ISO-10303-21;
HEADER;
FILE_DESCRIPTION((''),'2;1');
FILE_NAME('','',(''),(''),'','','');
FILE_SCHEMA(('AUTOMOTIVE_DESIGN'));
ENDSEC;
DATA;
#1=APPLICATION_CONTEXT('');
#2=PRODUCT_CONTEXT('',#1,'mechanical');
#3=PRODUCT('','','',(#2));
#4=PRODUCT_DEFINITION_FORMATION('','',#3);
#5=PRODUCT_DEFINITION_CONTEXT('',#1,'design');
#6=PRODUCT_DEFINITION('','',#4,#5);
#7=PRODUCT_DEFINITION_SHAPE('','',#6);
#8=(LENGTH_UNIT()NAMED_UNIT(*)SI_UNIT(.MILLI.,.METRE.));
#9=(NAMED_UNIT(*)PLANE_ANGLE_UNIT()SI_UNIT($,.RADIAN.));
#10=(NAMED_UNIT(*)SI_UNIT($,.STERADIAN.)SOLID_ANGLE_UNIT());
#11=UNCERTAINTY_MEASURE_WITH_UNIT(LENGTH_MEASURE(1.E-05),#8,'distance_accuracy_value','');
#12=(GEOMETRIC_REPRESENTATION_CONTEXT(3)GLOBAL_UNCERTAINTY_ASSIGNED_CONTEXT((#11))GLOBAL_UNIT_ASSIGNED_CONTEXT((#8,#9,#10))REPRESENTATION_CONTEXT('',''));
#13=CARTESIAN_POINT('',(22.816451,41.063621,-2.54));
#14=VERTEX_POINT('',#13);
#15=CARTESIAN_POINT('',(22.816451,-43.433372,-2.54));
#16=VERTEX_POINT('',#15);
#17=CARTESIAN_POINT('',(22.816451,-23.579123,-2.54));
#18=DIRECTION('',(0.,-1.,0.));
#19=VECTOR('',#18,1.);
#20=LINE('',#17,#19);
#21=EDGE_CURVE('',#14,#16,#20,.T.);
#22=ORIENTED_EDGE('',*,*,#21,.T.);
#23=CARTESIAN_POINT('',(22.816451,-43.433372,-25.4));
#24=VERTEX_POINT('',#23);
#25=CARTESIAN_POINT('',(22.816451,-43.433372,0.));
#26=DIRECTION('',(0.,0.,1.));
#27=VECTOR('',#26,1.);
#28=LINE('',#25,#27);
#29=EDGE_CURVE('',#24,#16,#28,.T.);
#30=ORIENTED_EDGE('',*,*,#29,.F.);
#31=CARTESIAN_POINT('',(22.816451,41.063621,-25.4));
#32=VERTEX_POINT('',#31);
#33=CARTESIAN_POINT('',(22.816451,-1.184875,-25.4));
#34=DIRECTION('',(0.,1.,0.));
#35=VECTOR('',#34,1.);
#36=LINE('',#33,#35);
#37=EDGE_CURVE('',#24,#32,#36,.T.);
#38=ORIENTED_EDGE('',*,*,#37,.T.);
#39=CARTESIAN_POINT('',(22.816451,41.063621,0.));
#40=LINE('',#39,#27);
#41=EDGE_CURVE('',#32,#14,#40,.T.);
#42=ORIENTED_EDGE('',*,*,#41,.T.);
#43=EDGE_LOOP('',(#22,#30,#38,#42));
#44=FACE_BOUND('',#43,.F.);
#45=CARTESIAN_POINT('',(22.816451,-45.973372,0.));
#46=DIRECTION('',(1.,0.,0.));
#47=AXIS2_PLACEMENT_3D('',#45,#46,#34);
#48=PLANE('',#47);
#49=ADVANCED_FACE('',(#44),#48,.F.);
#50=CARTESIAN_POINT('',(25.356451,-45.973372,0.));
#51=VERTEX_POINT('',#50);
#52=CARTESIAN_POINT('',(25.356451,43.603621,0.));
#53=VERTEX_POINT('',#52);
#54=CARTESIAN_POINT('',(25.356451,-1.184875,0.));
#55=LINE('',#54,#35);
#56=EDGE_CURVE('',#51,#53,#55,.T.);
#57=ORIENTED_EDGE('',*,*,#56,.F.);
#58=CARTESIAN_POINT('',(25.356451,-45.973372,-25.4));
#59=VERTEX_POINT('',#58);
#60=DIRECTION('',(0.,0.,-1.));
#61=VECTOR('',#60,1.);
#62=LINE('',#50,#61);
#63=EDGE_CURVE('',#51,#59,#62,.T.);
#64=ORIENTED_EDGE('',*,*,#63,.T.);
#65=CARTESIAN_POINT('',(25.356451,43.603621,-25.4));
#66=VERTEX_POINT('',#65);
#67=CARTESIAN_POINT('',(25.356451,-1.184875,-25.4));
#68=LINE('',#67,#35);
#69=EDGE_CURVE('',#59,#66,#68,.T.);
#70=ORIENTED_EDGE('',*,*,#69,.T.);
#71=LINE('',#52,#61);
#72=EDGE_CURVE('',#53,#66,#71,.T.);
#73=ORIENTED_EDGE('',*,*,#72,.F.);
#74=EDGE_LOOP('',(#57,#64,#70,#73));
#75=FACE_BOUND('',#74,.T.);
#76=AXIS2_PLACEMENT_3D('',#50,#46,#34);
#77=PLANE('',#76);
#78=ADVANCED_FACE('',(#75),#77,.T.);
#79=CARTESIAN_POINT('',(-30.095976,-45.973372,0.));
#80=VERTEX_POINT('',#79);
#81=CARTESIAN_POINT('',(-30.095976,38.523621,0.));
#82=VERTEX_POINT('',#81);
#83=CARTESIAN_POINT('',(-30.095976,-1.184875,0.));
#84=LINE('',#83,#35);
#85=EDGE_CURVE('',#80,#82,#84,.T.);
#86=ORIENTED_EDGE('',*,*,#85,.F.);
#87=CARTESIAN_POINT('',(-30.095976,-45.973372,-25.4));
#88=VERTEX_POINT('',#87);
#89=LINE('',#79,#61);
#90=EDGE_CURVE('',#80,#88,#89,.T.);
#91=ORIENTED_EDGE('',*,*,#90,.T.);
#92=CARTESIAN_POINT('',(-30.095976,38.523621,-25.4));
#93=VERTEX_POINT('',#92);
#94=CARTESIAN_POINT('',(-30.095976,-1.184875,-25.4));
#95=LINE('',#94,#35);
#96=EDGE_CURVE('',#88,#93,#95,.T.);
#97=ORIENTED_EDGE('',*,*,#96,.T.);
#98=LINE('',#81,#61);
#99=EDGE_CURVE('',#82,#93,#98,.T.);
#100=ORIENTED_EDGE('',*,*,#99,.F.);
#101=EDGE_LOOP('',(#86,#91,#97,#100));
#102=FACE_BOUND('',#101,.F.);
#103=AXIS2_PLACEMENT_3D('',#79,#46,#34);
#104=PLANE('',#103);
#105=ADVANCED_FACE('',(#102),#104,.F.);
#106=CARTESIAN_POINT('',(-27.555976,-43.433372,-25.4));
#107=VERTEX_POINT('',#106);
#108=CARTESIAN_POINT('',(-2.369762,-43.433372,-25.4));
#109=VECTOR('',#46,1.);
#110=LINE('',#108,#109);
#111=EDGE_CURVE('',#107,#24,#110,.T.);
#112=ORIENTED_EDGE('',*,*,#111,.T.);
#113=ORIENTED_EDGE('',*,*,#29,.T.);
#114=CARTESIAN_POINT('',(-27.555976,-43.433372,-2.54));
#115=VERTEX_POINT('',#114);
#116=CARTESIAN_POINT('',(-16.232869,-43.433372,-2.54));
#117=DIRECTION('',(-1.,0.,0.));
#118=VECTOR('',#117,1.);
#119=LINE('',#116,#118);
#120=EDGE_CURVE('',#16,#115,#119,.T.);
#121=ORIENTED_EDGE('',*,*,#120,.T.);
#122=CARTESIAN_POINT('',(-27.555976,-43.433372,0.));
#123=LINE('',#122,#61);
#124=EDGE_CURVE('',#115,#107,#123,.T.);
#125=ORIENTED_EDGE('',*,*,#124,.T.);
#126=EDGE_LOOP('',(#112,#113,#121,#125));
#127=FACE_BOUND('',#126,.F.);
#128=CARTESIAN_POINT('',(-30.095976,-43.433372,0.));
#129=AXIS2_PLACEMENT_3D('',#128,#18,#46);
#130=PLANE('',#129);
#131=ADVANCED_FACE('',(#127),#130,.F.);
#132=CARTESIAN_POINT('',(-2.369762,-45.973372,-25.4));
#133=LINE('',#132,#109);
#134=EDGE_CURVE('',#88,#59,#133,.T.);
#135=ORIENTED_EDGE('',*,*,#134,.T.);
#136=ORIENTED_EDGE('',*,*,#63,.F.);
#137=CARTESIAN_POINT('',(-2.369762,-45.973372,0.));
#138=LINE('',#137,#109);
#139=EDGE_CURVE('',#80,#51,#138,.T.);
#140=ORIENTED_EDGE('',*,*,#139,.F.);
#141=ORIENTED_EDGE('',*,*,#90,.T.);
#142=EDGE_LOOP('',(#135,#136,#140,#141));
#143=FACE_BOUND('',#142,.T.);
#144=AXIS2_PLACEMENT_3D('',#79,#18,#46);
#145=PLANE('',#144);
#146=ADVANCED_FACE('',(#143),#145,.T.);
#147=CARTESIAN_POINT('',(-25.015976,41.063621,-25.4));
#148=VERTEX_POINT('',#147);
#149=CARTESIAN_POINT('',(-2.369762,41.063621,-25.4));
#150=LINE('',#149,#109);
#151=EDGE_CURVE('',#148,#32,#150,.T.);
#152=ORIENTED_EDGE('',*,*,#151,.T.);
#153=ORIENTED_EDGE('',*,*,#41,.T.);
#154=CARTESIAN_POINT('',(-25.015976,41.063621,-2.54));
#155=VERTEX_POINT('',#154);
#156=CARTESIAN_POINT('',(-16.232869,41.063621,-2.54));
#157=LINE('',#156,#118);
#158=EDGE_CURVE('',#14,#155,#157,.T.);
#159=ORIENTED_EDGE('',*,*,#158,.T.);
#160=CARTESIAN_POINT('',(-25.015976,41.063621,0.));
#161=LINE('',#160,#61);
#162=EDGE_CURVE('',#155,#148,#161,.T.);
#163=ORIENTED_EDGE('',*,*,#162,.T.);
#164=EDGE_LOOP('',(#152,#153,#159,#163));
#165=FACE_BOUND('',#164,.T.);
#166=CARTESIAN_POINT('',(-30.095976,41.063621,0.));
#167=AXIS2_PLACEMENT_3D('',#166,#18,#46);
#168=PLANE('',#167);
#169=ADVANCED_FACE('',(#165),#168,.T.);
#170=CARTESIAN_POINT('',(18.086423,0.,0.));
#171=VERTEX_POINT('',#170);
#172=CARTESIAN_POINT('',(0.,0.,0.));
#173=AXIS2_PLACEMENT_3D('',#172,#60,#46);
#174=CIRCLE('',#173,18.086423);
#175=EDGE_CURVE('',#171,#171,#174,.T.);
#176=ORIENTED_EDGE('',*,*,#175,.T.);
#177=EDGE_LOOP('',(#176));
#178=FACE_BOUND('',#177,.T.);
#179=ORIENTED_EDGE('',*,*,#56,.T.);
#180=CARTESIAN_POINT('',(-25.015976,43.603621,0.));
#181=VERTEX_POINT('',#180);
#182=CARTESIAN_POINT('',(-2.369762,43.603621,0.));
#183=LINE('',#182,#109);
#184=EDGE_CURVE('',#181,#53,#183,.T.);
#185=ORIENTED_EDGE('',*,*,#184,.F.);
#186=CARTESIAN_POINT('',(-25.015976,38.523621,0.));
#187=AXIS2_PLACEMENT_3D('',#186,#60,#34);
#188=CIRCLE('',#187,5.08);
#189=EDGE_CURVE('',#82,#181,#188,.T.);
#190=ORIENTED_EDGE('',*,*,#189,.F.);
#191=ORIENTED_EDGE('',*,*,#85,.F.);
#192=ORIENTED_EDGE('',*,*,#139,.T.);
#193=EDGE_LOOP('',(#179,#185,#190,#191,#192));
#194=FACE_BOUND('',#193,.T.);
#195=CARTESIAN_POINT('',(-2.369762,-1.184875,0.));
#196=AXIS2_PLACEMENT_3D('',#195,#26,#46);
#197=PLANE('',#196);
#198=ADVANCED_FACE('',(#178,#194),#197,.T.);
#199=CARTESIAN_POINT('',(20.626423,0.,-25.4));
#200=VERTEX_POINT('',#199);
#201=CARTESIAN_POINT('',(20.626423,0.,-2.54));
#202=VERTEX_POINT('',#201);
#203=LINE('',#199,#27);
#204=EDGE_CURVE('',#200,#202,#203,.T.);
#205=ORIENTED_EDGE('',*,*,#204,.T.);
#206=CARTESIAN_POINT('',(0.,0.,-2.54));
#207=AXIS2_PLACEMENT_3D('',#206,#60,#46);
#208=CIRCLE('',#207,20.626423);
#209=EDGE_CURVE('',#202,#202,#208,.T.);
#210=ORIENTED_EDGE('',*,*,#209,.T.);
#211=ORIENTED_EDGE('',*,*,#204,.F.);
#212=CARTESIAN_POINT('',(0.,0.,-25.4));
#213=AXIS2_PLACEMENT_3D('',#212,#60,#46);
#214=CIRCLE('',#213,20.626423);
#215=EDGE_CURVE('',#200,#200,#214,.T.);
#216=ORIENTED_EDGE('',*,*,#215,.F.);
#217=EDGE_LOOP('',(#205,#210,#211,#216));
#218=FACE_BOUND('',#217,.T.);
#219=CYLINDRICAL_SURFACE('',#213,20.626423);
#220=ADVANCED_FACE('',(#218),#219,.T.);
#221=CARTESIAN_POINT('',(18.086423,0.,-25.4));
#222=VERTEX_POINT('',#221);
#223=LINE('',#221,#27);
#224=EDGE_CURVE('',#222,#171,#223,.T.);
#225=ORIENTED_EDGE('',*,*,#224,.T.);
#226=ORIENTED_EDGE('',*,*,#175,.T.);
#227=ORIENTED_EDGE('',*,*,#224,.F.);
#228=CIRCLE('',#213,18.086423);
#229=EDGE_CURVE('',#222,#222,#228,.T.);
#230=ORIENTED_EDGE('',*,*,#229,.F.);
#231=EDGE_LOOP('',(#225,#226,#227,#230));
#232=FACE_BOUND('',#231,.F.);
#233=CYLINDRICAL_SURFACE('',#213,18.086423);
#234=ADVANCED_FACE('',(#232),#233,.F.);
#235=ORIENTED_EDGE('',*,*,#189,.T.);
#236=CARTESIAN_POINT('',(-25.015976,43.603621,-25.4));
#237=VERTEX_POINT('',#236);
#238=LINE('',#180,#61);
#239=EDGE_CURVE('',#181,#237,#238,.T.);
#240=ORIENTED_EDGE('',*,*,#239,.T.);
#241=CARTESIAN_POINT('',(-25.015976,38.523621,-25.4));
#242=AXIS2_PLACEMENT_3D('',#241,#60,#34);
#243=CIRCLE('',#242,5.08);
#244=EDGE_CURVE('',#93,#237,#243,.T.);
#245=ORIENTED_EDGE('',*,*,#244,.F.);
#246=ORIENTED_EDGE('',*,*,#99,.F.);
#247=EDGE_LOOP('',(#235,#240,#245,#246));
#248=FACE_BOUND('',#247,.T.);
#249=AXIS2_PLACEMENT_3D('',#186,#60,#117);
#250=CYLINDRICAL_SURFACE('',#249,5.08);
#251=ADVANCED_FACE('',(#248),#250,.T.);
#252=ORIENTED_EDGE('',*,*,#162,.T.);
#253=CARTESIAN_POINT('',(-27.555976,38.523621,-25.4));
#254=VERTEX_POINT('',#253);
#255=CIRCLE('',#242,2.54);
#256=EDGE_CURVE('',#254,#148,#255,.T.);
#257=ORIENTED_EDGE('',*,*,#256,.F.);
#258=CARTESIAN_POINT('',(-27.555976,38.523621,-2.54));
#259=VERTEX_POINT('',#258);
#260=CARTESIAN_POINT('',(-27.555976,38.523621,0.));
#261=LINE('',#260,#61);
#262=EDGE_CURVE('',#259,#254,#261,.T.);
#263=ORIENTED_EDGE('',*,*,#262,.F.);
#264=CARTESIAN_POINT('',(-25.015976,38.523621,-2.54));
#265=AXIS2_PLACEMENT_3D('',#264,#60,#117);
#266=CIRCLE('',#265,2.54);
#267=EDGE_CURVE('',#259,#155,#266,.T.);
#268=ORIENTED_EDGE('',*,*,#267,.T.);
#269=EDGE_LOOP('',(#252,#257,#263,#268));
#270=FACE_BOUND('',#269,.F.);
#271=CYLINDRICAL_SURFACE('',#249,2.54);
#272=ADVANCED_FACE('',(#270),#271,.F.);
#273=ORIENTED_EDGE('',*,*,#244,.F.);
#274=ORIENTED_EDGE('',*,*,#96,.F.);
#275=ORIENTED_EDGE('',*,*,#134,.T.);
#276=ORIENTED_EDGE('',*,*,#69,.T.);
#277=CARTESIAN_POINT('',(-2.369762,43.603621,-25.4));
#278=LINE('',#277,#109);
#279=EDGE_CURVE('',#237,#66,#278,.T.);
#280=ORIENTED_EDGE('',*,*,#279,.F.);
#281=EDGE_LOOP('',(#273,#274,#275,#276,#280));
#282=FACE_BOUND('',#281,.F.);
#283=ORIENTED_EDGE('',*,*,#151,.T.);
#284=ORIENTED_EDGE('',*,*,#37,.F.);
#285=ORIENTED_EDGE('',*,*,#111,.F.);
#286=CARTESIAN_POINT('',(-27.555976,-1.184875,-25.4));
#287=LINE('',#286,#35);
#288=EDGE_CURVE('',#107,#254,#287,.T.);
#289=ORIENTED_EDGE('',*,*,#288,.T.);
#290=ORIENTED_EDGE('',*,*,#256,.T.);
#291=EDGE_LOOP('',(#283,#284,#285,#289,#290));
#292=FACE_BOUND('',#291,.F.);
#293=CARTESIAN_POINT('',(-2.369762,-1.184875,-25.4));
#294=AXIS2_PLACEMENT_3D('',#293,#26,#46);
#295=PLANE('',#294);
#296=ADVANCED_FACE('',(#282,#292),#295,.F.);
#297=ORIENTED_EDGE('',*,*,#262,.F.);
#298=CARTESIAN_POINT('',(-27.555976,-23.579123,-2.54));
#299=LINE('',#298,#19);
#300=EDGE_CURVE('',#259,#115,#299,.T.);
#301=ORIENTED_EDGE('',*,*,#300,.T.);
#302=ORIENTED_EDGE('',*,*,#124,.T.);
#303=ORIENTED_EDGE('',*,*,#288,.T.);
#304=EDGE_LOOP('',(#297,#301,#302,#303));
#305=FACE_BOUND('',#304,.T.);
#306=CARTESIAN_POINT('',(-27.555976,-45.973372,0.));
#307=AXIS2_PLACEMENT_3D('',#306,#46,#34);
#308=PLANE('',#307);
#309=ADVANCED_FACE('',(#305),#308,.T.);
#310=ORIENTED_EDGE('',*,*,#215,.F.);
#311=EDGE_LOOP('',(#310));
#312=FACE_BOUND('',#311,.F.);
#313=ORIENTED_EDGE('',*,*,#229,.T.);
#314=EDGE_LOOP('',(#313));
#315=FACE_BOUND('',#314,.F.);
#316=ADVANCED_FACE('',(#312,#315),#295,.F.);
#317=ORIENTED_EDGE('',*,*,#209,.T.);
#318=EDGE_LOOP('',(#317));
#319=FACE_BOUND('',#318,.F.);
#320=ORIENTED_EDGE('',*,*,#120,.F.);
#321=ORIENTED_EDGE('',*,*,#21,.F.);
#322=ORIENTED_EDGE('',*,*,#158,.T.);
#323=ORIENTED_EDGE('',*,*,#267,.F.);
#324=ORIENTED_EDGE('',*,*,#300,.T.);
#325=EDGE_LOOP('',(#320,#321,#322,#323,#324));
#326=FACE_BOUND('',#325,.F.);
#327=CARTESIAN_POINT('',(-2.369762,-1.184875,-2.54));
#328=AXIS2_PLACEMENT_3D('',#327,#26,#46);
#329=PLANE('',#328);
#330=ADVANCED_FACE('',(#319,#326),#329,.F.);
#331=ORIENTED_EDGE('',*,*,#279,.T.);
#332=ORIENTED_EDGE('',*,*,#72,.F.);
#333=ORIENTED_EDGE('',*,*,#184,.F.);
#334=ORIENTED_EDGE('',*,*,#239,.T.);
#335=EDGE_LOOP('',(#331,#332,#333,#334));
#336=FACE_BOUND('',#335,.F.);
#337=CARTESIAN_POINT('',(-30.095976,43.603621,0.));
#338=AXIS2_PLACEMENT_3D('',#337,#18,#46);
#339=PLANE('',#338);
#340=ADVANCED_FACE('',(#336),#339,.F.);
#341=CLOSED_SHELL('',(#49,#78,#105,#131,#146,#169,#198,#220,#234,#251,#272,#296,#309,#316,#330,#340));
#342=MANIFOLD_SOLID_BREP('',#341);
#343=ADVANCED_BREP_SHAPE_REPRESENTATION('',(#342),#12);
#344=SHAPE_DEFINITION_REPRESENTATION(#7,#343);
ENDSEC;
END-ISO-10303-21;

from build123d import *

# Parameters (mm, degrees)
F0_W     = 55.4524268955
F0_H     = 89.5769931376
F1_DEPTH = 25.4
F2_R     = 5.08
F3_R     = 18.0864233447
F4_DEPTH = 25.4
F5_T     = -2.54


with BuildPart() as f1:
    # F0 (on Top) → F1 (new body)
    with BuildSketch(Plane.XY):
        with Locations((-2.3697623983, -1.1848751456)):
            Rectangle(F0_W, F0_H)
    extrude(amount=-F1_DEPTH)

    # F2
    f2_edges = [f1.edges().sort_by_distance(p)[0] for p in [
        (-30.095976, 43.603621, -12.7),
    ]]
    fillet(f2_edges, radius=F2_R)

    # F3 (on face) → F4 (cut)
    with BuildSketch(Plane(origin=(0, 0, -25.4), x_dir=(1, 0, 0), z_dir=(0, 0, -1))):
        Circle(F3_R)
    extrude(amount=-F4_DEPTH, mode=Mode.SUBTRACT)

    # F5
    f5_openings = [f1.faces().sort_by_distance(p)[0] for p in [
        (0.170238, 42.550103, -25.4),
    ]]
    offset(amount=F5_T, openings=f5_openings)


solid = f1.part
